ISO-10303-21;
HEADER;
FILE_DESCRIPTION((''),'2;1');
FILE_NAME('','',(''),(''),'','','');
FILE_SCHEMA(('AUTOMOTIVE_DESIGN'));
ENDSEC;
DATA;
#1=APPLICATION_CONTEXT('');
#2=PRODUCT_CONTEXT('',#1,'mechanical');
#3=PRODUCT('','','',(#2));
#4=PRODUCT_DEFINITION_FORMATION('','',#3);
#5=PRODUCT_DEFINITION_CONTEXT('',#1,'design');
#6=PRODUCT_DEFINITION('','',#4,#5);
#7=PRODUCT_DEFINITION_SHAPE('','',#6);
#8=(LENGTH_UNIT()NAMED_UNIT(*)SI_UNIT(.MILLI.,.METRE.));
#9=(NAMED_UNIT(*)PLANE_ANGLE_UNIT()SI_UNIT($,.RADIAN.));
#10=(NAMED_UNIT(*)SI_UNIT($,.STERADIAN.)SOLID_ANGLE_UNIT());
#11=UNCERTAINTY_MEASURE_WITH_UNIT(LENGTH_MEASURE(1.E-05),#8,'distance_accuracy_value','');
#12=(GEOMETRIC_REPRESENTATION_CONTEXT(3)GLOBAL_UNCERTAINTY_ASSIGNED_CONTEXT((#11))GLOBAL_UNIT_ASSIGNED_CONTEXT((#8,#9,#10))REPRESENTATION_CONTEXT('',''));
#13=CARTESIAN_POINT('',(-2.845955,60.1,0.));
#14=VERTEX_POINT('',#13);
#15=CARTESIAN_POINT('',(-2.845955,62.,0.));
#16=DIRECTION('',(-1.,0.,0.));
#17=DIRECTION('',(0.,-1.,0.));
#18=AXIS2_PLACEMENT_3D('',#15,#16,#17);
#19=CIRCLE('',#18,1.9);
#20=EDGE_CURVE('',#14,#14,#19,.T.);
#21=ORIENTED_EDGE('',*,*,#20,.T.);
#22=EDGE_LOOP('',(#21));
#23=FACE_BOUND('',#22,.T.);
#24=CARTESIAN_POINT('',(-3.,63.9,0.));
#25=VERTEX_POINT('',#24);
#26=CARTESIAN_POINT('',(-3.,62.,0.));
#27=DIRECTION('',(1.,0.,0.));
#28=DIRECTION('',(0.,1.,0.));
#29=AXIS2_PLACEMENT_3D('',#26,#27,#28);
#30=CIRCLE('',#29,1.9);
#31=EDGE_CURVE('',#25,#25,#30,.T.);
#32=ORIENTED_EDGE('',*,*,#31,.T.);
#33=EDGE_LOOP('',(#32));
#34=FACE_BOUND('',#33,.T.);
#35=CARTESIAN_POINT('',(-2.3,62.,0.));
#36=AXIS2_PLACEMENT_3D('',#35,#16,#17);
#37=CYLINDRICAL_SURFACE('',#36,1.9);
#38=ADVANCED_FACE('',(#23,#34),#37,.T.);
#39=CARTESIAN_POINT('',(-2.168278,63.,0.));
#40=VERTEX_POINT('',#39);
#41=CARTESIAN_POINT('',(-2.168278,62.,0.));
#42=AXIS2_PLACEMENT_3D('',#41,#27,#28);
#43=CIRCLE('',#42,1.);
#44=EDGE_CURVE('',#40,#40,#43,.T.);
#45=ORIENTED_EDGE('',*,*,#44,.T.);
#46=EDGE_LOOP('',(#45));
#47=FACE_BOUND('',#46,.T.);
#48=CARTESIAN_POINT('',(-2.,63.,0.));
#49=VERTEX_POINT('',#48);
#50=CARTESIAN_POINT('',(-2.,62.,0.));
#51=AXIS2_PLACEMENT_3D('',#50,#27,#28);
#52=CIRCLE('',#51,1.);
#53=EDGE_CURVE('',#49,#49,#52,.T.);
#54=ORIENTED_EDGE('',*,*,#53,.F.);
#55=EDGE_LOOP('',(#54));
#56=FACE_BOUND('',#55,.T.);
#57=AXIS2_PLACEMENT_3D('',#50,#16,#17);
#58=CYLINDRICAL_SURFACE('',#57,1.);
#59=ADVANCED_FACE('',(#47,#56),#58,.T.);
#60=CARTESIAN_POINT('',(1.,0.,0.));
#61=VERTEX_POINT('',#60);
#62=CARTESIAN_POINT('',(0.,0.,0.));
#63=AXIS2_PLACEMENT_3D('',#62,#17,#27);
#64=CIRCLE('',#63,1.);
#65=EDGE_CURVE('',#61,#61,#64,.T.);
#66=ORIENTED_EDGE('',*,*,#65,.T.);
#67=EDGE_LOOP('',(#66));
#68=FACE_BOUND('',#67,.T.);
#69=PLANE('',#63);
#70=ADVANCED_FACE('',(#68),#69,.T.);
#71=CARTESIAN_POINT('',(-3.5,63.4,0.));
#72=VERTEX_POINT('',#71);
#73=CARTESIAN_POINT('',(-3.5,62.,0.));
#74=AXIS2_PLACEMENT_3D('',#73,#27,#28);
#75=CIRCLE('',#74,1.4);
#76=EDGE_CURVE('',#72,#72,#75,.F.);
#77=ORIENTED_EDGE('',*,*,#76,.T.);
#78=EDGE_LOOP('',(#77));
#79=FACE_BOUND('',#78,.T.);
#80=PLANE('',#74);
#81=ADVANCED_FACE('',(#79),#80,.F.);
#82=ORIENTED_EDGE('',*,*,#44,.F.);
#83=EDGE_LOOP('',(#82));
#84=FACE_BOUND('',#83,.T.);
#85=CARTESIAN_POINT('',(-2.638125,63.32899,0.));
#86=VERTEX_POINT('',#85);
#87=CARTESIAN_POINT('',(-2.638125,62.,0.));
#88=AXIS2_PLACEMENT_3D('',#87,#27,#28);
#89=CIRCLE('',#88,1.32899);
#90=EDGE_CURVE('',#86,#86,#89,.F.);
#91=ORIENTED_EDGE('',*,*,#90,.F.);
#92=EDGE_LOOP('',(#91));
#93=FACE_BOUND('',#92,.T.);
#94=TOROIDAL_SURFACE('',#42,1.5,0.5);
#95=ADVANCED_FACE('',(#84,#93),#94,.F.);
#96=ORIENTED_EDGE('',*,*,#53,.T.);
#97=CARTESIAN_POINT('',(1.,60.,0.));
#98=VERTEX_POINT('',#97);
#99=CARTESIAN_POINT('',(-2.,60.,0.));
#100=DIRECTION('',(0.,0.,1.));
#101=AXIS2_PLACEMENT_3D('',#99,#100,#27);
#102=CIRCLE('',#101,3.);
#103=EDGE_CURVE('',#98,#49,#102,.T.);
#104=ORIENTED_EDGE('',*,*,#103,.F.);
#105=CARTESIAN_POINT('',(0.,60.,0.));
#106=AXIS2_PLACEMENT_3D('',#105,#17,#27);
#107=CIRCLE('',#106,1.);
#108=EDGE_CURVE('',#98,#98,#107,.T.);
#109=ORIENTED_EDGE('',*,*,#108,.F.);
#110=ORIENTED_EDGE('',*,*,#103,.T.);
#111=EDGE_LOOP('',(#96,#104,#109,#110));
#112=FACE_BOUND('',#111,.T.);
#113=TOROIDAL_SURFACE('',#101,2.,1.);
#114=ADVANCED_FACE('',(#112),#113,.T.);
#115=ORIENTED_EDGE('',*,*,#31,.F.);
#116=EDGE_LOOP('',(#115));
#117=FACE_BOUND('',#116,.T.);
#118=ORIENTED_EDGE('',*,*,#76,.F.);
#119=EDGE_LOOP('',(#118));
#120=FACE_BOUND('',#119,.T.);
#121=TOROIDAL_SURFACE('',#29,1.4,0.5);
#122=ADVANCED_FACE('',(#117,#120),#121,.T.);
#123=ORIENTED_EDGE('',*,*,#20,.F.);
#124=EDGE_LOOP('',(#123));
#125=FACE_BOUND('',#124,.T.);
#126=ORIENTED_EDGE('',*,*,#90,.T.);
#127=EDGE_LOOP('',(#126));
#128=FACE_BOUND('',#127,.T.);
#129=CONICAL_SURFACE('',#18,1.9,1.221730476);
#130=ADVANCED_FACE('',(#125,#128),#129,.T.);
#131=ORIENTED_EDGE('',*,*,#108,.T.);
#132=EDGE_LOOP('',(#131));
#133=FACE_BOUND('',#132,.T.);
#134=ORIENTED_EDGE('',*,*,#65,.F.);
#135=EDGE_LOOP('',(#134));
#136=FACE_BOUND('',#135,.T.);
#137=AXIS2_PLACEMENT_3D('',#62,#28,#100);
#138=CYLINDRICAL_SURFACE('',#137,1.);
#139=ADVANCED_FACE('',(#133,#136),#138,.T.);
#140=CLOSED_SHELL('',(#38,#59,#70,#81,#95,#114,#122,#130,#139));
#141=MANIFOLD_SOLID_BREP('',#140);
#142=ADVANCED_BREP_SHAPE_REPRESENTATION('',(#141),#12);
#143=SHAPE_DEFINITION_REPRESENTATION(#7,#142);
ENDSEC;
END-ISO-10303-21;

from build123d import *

# Parameters (mm, degrees)
SWEEP1_PROFILE_R    = 1
SKETCH10_R          = 1.9
BOSS_EXTRUDE1_DEPTH = 1.2
CHAMFER1_SIZE       = 1.5
CHAMFER1_SIZE_2     = 0.545955351
FILLET1_R           = 0.5


with BuildPart() as part:
    # Sweep1: sweep along a path in Sketch1
    with BuildLine(Plane.XY) as sweep1_path:
        Line((0, 0), (0, 60))
        ThreePointArc((0, 60), (-0.585786438, 61.414213562), (-2, 62))
        Line((-2, 62), (-3.5, 62))
    # Sweep1 profile (on start of the path) → Sweep1 (sweep)
    with BuildSketch(Plane.ZX):
        Circle(SWEEP1_PROFILE_R)
    sweep(path=sweep1_path.line)

    # Sketch10 → Boss-Extrude1 (add)
    with BuildSketch(Plane.ZY.offset(3.5)):
        with Locations(Location((0, 62, 0), (0, 0, 270))):
            Circle(SKETCH10_R)
    extrude(amount=-BOSS_EXTRUDE1_DEPTH)

    # Chamfer1
    # the kernel refuses this chamfer: 1.5, 0.545955351 mm, written as the material it takes off along each edge
    with BuildSketch(Plane(origin=(-2.3, 62, 0), x_dir=(0, -1, 0), z_dir=(0, 0, -1))) as chamfer1_piece_1_section:
        Polygon((1.9 - CHAMFER1_SIZE, 0), (1.9, CHAMFER1_SIZE_2), (1.9, 0), align=None)
    chamfer1_piece_1 = revolve(axis=Axis((-2.3, 62, 0), (-1, 0, 0)), mode=Mode.PRIVATE)
    chamfer1_piece_1 = chamfer1_piece_1 - Plane(origin=(-2.677798348, 62, 0), x_dir=(0, 0, 1), z_dir=(-1, 0, 0)) * Cylinder(1, 8, mode=Mode.PRIVATE)
    add(chamfer1_piece_1, mode=Mode.SUBTRACT)

    # Fillet1
    fillet1_edges = [part.edges().sort_by_distance(p)[0] for p in [
        (-3.5, 63.9, 0),
        (-2.51838214, 61.292893219, 0.707106781),
    ]]
    fillet(fillet1_edges, radius=FILLET1_R)


solid = part.part
